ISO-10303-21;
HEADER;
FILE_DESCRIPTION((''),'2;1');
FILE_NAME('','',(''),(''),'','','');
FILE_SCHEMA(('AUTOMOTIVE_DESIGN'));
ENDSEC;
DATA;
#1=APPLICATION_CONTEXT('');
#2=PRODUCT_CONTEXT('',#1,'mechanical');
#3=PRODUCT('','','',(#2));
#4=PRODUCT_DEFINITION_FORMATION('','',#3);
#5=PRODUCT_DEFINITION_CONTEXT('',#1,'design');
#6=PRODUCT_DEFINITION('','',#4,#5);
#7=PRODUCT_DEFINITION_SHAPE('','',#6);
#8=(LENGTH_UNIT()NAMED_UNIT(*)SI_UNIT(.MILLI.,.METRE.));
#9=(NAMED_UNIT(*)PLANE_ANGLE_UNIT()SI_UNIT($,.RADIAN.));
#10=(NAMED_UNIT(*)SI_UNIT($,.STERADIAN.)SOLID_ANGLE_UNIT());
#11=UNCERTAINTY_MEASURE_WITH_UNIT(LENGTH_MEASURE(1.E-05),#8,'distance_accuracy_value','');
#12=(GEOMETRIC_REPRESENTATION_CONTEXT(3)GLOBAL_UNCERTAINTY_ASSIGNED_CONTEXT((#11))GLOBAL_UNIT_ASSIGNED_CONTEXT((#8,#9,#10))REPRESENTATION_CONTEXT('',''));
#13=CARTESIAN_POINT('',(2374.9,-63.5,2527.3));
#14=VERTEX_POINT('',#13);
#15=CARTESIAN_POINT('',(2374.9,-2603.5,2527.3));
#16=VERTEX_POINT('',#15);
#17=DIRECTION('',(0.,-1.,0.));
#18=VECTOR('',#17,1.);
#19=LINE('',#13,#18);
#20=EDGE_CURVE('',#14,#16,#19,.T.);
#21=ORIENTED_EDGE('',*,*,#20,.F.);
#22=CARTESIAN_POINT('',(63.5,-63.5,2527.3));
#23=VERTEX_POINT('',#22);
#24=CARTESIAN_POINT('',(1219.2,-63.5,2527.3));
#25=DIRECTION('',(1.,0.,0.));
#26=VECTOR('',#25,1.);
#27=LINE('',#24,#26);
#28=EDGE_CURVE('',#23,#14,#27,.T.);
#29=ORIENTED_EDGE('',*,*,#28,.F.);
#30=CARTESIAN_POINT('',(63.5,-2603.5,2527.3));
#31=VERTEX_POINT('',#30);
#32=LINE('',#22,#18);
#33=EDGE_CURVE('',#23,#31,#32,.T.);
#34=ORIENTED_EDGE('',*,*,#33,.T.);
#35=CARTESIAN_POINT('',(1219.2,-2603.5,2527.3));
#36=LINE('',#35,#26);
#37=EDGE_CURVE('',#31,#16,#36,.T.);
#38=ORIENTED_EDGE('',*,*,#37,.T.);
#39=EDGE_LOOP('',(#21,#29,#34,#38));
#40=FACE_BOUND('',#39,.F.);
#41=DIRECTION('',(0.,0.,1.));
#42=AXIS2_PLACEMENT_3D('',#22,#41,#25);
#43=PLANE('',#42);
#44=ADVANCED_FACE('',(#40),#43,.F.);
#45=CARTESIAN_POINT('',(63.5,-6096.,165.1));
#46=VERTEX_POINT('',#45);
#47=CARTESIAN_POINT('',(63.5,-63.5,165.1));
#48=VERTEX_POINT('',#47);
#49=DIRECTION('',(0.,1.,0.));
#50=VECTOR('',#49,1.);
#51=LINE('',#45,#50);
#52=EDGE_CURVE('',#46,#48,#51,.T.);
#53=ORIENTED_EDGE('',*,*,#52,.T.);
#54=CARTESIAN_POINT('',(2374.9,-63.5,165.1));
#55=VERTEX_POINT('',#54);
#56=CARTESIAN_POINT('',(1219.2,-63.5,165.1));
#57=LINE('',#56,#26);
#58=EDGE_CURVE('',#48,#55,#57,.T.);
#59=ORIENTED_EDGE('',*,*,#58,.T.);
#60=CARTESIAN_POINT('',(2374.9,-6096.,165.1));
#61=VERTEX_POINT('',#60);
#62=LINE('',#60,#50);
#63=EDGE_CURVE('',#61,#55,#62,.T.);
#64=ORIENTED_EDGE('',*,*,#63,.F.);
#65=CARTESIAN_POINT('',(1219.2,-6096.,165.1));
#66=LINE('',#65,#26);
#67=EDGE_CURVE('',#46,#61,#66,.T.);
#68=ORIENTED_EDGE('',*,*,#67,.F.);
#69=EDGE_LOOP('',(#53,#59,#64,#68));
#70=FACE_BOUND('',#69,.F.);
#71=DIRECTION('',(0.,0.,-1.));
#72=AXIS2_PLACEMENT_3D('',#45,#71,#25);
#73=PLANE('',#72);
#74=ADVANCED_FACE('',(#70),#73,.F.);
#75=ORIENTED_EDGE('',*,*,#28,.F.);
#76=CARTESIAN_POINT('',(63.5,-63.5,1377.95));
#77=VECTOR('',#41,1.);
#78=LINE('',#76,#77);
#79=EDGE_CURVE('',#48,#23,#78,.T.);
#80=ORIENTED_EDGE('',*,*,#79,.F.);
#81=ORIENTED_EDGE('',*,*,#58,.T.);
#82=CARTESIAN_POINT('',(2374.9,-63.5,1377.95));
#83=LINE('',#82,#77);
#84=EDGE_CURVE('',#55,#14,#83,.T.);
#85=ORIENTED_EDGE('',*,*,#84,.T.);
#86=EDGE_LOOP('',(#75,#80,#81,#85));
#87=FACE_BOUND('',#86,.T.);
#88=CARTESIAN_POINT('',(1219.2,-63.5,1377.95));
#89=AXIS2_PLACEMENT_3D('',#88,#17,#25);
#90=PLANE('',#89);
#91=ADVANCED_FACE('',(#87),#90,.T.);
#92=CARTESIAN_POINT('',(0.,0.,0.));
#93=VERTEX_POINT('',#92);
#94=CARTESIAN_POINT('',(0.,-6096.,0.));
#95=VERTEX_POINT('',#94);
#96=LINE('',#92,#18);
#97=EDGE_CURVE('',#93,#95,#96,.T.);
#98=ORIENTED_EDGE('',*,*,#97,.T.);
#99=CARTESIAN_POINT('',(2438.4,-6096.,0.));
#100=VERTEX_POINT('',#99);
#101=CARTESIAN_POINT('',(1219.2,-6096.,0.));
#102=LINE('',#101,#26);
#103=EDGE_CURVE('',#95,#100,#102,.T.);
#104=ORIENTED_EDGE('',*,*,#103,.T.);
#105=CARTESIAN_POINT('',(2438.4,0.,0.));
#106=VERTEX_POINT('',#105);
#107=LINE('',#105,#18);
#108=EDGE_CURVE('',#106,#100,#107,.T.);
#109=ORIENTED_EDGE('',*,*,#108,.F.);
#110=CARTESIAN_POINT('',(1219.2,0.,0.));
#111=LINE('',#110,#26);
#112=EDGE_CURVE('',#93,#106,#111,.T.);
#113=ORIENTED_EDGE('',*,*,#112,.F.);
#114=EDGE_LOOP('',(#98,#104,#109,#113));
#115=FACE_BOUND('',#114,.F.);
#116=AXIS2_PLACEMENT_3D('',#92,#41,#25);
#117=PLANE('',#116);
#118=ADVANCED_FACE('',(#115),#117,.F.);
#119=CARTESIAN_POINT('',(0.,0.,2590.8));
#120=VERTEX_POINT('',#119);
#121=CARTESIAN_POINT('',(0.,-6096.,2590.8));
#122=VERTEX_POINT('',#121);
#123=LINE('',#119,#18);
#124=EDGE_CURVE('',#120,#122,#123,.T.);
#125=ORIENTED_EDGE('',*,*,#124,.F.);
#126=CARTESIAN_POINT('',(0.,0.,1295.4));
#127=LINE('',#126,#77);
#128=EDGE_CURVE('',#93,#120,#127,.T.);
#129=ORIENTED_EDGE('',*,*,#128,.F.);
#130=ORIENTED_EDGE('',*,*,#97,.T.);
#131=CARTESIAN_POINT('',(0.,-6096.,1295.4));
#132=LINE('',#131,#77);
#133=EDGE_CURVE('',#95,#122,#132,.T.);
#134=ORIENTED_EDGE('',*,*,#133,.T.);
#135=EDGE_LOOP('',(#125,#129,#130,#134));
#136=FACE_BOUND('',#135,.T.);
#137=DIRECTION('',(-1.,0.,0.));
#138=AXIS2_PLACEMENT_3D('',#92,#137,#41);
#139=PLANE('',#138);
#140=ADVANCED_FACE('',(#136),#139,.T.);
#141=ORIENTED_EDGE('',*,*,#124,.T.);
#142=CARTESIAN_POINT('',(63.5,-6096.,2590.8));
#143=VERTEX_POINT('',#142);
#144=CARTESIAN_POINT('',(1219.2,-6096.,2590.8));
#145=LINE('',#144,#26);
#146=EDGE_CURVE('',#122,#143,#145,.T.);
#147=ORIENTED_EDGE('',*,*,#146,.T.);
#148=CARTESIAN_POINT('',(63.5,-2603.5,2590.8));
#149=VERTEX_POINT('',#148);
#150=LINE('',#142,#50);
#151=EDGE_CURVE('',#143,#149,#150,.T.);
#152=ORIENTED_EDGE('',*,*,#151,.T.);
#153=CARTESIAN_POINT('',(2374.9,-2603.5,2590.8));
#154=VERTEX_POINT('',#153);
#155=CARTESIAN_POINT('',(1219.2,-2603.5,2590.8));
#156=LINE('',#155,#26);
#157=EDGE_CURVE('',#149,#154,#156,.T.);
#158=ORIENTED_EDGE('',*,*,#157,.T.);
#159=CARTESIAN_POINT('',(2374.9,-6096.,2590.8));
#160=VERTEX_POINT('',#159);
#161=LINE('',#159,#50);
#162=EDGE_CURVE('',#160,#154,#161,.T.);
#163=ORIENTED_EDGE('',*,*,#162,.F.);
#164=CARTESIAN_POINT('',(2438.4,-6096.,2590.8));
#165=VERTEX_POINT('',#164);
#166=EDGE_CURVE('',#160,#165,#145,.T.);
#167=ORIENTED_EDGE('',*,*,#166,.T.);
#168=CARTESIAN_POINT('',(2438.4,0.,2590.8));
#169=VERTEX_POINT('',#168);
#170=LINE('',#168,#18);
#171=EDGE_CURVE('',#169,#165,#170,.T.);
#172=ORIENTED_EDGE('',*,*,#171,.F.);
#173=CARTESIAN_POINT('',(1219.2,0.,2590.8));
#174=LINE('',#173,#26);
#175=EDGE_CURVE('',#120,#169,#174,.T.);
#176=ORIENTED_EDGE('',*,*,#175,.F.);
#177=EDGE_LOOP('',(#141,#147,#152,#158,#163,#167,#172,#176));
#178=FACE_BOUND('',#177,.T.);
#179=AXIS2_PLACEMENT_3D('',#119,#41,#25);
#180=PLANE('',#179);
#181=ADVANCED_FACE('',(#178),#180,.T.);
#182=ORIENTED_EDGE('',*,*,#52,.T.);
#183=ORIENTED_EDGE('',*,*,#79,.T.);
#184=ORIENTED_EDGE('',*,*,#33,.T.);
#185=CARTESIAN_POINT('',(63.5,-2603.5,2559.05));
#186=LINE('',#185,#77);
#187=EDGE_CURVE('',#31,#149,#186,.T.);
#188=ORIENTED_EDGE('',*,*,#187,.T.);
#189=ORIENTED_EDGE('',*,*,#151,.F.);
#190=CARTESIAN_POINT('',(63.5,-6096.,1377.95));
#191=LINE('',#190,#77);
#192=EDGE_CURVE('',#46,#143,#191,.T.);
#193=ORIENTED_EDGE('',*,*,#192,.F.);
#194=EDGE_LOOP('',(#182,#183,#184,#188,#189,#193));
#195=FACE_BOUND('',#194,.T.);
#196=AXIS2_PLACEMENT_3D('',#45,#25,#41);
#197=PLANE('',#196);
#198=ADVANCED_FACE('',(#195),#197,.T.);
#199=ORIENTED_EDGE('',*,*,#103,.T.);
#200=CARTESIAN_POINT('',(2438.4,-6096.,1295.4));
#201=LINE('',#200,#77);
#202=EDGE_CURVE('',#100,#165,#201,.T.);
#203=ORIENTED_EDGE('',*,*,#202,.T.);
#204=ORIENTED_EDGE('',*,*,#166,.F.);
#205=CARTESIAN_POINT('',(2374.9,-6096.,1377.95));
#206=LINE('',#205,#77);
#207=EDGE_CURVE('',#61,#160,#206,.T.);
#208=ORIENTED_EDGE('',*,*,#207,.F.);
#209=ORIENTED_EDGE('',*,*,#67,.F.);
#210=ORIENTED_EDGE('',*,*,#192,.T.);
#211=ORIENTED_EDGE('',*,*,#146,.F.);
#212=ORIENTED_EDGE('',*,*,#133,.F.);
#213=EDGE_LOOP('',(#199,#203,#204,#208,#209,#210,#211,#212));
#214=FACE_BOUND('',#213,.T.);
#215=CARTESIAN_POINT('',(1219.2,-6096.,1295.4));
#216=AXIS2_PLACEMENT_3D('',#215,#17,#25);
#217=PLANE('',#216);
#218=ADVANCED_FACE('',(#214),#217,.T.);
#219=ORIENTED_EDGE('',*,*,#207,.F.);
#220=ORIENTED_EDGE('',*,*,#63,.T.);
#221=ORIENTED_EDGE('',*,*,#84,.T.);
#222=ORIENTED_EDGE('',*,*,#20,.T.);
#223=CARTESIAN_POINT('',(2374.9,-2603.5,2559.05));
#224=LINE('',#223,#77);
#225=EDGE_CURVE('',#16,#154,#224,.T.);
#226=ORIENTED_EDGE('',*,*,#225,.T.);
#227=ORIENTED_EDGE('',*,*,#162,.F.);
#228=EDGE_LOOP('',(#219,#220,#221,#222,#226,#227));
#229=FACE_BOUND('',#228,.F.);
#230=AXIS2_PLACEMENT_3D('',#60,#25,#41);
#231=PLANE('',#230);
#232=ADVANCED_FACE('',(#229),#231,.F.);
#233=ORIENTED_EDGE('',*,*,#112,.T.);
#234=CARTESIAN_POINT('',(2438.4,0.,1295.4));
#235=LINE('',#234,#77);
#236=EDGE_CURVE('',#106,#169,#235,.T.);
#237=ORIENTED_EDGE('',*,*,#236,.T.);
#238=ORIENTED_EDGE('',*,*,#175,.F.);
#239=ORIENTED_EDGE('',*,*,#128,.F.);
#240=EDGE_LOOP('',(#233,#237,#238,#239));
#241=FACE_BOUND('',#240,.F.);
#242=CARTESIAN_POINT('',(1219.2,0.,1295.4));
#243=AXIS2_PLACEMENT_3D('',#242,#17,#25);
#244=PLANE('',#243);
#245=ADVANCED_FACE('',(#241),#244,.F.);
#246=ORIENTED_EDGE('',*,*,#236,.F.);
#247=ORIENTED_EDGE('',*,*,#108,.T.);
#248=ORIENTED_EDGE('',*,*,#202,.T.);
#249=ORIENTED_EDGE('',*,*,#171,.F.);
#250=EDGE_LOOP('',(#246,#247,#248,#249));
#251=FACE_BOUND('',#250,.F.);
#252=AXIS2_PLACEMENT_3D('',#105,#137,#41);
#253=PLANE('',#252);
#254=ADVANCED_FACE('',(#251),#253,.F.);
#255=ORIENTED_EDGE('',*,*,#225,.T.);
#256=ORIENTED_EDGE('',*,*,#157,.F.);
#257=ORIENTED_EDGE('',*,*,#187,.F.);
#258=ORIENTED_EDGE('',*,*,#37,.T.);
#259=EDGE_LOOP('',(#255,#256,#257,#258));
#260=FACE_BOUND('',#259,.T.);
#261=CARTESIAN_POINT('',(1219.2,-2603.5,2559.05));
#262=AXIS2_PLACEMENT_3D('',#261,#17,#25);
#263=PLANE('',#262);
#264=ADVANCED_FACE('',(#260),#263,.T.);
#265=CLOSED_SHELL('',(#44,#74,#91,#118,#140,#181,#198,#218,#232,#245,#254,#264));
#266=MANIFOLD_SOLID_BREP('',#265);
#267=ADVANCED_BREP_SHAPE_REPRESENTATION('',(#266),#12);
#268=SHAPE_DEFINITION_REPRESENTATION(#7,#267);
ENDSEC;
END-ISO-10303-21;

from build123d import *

# Parameters (mm, degrees)
F0_W     = 2438.4
F0_H     = 2590.8
F1_DEPTH = 6096
F2_W     = 2311.4
F2_H     = 2425.7
F3_DEPTH = 6032.5
F4_W     = 2311.4
F4_H     = 63.5
F5_DEPTH = 2540


# Not quite as in the source:
# - a feature names something its author has since deleted; it is built from what else it names


with BuildPart() as f1:
    # F0 (on Front) → F1 (new body)
    with BuildSketch(Plane.XZ):
        with Locations((1219.2, 1295.4)):
            Rectangle(F0_W, F0_H)
    extrude(amount=F1_DEPTH)

    # F2 (on face) → F3 (cut)
    with BuildSketch(Plane.XZ.offset(6096)):
        with Locations((1219.2, 1377.95)):
            Rectangle(F2_W, F2_H)
    extrude(amount=-F3_DEPTH, mode=Mode.SUBTRACT)

    # F4 (on face) → F5 (join)
    with BuildSketch(Plane.XZ.offset(63.5)):
        with Locations((1219.2, 2559.05)):
            Rectangle(F4_W, F4_H)
    extrude(amount=F5_DEPTH)


solid = f1.part
